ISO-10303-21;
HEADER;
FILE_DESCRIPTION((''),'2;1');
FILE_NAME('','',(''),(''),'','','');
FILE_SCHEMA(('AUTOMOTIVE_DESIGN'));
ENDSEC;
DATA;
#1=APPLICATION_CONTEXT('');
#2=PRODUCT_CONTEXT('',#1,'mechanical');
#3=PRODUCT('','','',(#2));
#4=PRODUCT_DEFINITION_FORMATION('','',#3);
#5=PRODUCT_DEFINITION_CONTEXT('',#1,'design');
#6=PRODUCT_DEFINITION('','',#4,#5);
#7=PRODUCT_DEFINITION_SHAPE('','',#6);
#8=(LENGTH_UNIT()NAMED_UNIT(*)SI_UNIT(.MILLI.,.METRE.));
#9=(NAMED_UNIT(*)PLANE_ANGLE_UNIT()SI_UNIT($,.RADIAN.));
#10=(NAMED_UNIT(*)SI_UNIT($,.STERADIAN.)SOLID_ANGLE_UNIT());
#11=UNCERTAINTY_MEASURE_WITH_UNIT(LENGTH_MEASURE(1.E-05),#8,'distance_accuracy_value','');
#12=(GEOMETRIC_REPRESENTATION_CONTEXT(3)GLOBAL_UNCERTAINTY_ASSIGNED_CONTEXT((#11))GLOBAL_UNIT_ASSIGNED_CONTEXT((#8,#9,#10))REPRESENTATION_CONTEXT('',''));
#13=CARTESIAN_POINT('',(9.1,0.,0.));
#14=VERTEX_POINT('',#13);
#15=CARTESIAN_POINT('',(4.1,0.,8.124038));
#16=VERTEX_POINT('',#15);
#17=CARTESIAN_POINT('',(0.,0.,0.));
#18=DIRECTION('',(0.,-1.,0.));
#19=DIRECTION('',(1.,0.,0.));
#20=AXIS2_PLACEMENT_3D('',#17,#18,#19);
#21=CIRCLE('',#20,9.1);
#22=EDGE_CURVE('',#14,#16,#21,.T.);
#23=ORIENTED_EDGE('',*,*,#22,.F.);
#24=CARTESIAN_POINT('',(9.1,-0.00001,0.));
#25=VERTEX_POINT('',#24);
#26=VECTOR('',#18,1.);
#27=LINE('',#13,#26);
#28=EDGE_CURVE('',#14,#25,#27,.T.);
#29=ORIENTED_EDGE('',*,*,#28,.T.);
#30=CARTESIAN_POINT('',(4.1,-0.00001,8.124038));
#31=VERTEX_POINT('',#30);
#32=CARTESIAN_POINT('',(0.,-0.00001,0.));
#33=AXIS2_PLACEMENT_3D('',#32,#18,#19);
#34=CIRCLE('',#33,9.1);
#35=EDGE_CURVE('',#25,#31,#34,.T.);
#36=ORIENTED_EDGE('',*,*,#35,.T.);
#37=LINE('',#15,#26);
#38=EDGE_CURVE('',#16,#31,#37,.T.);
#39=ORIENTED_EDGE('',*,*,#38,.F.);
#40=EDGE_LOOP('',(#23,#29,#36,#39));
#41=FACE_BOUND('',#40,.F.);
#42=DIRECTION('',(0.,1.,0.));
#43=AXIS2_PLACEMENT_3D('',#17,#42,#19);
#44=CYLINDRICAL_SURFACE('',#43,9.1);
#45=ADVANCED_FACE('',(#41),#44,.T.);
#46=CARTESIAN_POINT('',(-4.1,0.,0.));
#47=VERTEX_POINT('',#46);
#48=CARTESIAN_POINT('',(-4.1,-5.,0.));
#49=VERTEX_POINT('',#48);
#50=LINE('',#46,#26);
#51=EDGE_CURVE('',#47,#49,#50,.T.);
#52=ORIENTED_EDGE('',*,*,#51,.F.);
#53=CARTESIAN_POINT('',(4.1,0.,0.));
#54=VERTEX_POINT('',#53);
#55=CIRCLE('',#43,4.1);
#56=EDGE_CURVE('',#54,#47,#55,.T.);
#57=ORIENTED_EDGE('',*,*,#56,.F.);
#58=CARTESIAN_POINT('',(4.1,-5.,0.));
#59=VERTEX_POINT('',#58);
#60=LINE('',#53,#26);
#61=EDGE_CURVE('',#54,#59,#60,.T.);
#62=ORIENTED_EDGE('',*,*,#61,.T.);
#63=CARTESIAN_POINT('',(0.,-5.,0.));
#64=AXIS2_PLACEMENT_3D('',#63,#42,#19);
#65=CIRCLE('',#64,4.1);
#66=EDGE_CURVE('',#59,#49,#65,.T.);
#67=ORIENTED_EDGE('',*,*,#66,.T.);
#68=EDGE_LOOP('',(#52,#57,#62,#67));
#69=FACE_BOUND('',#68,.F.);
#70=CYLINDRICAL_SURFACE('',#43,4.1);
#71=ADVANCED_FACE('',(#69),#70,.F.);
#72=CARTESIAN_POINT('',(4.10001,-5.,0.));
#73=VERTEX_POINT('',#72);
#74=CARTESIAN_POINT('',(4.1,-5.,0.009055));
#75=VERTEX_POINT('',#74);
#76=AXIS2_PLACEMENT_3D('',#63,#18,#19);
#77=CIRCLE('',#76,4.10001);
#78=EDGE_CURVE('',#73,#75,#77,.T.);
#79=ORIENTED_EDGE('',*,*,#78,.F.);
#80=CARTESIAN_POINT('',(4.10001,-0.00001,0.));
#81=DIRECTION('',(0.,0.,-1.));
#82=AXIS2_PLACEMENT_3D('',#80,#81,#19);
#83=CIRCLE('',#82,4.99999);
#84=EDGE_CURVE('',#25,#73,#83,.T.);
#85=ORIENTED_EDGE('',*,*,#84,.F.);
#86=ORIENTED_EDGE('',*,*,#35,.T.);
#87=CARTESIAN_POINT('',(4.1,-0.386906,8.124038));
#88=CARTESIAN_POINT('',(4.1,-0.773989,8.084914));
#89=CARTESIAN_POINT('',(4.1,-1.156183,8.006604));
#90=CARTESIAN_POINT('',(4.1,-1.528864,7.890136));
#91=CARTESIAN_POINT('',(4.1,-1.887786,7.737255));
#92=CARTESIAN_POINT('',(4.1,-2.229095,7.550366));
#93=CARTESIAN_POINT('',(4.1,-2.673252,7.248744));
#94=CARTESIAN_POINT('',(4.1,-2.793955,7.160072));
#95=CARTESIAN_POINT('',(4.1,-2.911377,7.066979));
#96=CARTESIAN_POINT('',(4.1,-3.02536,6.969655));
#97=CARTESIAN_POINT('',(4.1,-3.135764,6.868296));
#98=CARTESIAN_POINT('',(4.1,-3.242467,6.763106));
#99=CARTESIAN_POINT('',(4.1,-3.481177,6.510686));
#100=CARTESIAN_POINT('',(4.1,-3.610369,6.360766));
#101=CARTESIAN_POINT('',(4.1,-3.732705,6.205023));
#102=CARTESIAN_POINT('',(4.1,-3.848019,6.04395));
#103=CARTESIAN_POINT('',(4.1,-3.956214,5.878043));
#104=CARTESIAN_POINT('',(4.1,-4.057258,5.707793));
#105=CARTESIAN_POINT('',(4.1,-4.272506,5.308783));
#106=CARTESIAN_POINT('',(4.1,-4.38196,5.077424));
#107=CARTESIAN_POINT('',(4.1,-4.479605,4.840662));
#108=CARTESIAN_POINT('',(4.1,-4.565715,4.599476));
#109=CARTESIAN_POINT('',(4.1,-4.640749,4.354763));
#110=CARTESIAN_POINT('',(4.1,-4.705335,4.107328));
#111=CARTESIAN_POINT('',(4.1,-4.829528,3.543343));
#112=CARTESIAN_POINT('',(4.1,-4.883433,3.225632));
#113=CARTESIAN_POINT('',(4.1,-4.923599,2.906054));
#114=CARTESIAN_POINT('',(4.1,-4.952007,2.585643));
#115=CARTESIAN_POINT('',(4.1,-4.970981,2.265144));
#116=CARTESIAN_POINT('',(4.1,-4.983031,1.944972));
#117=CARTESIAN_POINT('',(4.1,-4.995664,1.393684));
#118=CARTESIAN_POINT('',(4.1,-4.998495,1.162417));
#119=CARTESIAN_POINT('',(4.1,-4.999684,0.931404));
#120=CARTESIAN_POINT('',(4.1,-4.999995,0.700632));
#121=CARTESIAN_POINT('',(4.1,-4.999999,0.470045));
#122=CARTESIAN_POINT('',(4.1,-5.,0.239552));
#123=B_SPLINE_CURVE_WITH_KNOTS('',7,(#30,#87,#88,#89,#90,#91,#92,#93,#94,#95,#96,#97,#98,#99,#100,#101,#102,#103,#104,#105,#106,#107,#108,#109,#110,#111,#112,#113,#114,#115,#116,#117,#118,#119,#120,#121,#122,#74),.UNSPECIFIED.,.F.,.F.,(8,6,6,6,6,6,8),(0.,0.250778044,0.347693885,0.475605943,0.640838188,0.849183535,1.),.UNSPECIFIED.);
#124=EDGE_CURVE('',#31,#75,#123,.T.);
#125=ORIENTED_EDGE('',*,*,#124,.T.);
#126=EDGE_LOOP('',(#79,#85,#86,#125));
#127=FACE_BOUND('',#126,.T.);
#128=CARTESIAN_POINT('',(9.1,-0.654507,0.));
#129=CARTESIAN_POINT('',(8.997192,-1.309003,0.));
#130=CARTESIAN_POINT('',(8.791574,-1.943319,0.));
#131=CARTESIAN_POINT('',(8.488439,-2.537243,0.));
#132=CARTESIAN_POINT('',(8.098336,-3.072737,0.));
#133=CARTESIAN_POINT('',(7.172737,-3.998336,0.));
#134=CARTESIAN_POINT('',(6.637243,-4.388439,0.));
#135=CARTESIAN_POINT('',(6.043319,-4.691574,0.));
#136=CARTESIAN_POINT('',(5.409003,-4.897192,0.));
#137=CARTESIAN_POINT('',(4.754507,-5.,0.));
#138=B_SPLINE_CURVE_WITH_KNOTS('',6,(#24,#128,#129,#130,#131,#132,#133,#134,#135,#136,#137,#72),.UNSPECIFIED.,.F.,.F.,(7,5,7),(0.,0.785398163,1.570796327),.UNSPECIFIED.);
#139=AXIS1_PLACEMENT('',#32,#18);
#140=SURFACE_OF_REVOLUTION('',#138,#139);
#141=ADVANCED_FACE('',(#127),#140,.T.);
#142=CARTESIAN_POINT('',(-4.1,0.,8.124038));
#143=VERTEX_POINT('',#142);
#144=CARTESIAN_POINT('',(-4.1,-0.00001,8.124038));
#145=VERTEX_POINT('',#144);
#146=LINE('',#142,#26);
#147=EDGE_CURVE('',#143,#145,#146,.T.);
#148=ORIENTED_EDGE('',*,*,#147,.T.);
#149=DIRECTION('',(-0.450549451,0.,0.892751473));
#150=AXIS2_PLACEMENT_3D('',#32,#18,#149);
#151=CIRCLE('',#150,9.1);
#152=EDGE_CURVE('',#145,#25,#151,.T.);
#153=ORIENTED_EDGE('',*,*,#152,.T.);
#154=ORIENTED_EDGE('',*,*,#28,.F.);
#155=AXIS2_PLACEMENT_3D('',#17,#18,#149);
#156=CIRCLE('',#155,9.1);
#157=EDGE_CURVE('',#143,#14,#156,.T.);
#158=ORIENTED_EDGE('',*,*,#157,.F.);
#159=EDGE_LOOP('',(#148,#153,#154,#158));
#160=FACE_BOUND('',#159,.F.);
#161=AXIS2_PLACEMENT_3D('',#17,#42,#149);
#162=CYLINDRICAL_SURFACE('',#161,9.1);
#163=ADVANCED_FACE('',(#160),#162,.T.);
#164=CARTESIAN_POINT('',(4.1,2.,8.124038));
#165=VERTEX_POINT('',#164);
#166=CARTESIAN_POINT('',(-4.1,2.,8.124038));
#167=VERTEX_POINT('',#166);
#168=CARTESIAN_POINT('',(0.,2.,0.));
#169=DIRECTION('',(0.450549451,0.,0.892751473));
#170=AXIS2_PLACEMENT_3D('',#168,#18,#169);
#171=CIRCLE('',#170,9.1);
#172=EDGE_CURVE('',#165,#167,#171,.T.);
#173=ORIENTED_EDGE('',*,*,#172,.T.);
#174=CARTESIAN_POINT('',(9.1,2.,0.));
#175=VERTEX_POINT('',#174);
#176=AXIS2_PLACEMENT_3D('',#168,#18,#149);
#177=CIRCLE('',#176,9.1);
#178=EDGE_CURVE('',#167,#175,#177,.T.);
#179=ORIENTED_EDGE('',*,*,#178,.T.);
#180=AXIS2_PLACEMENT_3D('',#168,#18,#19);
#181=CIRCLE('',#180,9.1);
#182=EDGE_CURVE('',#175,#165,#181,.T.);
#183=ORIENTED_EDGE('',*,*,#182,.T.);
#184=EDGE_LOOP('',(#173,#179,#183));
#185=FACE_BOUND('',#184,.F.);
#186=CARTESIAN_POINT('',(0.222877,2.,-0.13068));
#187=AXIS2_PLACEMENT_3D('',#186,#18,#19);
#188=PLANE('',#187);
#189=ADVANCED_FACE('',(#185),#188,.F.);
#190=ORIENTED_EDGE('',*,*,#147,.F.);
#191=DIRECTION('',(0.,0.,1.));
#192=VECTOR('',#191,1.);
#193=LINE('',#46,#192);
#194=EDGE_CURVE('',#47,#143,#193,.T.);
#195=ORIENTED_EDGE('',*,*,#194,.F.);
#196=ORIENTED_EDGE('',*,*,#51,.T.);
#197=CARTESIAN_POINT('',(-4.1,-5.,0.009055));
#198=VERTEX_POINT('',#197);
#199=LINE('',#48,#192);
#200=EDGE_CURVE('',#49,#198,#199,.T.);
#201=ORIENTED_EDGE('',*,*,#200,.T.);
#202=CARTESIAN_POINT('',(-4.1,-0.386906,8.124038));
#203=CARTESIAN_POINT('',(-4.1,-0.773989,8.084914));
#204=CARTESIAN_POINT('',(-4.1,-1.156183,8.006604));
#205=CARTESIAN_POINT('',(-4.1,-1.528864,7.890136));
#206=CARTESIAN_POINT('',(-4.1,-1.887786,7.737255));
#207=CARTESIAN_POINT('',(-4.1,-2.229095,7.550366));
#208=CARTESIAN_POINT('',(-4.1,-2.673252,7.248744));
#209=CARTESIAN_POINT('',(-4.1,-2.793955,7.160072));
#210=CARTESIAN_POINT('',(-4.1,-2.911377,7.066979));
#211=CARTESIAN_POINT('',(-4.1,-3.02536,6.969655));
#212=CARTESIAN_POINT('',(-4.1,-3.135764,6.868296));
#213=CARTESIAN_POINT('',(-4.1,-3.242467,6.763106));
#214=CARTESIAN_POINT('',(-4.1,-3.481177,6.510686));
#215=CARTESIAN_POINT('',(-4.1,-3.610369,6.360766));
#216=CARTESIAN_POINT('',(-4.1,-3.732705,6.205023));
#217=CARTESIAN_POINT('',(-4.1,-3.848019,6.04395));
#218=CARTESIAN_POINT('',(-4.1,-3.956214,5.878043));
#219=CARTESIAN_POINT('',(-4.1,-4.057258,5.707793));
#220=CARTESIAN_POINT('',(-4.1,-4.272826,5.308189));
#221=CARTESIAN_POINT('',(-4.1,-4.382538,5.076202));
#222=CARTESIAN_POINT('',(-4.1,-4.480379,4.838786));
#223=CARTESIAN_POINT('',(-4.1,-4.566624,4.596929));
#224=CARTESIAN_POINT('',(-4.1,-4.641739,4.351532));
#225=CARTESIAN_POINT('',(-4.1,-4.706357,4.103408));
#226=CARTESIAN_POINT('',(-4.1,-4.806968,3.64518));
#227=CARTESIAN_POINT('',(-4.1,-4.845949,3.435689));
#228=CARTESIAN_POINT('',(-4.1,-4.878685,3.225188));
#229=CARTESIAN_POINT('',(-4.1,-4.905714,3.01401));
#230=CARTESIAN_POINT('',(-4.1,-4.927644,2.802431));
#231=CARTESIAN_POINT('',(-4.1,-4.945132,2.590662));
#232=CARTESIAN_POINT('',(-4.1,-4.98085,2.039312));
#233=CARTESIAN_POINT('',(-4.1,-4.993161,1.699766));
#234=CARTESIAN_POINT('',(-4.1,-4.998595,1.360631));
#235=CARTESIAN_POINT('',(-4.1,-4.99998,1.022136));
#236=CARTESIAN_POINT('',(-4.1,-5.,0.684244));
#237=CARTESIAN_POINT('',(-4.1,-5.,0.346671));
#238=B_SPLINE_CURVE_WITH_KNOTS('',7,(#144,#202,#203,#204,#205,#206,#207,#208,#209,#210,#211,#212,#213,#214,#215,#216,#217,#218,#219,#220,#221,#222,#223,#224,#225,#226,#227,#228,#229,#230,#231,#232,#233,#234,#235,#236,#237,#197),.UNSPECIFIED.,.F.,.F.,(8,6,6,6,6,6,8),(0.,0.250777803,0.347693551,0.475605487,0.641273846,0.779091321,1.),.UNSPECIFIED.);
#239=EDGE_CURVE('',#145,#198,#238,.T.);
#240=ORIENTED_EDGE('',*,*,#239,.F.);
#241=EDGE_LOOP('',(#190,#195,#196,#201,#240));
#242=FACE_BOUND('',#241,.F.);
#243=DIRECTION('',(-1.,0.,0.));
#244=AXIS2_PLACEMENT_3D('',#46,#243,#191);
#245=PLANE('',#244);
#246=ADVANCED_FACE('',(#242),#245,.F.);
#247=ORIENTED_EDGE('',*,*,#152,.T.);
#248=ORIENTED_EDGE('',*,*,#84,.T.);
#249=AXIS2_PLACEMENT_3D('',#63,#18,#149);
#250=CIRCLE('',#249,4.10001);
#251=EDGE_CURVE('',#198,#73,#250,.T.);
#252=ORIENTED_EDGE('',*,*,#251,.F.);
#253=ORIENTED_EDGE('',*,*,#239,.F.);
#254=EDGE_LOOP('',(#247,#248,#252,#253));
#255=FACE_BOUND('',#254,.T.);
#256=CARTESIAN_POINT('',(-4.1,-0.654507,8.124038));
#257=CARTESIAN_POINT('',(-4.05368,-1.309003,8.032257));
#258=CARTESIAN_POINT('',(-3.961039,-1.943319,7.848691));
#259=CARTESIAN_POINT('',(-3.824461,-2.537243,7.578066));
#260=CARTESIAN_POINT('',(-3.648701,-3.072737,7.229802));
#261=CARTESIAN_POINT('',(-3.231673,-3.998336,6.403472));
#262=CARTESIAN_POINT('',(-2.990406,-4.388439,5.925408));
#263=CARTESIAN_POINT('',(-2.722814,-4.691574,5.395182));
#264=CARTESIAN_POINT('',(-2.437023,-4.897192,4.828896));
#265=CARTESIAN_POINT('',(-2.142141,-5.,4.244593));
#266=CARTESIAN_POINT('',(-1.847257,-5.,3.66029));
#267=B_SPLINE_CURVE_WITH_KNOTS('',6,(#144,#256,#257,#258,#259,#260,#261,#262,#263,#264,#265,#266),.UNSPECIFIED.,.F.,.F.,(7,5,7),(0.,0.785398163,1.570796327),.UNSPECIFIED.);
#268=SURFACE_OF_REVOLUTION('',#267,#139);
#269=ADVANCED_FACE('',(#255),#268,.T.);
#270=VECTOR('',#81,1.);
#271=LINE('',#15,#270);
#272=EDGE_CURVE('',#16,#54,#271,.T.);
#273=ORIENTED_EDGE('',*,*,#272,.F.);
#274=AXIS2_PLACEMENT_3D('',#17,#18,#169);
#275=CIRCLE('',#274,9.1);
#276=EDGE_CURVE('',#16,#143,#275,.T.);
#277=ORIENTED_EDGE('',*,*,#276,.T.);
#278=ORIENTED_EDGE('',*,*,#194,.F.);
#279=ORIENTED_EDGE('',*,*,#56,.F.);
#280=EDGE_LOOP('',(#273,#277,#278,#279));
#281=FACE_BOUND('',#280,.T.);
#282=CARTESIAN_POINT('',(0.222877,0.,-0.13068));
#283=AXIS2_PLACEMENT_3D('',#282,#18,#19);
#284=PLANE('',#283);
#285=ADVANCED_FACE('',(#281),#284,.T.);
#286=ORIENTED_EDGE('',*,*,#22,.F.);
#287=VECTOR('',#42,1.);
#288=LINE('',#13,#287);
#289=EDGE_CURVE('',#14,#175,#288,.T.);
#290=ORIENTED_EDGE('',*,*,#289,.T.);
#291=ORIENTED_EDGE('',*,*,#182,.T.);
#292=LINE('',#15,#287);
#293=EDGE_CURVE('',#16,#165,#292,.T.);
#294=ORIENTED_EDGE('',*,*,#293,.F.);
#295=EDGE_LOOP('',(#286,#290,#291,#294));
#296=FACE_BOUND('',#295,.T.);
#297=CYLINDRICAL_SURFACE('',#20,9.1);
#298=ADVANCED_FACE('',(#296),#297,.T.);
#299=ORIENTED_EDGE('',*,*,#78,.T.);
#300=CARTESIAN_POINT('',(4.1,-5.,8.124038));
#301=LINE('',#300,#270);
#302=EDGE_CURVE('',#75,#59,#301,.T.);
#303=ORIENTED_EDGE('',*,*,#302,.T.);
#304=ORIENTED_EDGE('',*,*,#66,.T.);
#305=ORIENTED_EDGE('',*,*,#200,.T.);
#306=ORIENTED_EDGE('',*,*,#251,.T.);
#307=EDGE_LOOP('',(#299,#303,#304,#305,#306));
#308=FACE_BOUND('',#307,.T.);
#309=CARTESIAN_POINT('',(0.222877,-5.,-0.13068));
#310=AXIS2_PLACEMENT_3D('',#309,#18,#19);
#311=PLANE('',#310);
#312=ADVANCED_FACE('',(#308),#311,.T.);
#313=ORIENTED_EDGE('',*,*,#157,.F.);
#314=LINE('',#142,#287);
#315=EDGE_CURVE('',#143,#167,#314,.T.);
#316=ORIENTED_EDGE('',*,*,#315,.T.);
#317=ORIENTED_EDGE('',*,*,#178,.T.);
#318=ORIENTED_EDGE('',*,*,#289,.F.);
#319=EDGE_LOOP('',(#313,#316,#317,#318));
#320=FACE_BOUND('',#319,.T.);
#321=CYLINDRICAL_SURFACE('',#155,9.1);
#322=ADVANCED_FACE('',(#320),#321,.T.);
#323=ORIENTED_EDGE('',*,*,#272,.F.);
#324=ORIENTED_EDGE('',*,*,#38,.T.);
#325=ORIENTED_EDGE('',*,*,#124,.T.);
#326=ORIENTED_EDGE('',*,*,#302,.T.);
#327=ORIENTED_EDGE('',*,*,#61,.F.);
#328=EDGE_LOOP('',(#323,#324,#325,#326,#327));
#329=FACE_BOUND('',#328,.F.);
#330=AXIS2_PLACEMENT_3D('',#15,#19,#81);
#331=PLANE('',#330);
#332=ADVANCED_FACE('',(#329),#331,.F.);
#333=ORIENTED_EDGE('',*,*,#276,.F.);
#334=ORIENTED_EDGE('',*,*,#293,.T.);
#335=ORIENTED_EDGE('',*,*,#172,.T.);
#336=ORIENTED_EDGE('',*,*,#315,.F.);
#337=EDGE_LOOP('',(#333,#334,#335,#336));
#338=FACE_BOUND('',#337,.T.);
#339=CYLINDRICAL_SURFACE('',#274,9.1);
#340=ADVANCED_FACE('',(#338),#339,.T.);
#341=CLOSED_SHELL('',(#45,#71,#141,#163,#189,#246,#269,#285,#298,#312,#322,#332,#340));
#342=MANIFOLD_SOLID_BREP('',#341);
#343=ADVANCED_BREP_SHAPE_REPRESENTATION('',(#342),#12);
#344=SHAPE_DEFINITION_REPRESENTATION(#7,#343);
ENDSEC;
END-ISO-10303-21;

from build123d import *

# Parameters (mm, degrees)
F1_DEPTH = 2
F2_DEPTH = 5
F3_R     = 4.99999


# Not quite as in the source:
# - a fillet or chamfer is up to 0.001 mm smaller than in the source, because OpenCascade refuses the exact size


with BuildPart() as f1:
    # F0 (on Front) → F1 (new body)
    with BuildSketch(Plane.XZ):
        with BuildLine():
            ThreePointArc((-4.1, 8.1240384046), (-4.7696960071, -7.749838708), (9.1, 0))
            ThreePointArc((9.1, 0), (7.749838708, 4.7696960071), (4.1, 8.1240384046))
            Line((4.1, 8.1240384046), (4.1, 0))
            ThreePointArc((4.1, 0), (0, -4.1), (-4.1, 0))
            Line((-4.1, 0), (-4.1, 8.1240384046))
        make_face()
        with BuildLine():
            Line((4.1, 0), (4.1, 8.1240384046))
            ThreePointArc((4.1, 8.1240384046), (0, 9.1), (-4.1, 8.1240384046))
            Line((-4.1, 8.1240384046), (-4.1, 0))
            ThreePointArc((-4.1, 0), (0, -4.1), (4.1, 0))
        make_face()
    extrude(amount=-F1_DEPTH)

    # F0 (on Front) → F2 (join)
    with BuildSketch(Plane.XZ):
        with BuildLine():
            ThreePointArc((-4.1, 8.1240384046), (-4.7696960071, -7.749838708), (9.1, 0))
            ThreePointArc((9.1, 0), (7.749838708, 4.7696960071), (4.1, 8.1240384046))
            Line((4.1, 8.1240384046), (4.1, 0))
            ThreePointArc((4.1, 0), (0, -4.1), (-4.1, 0))
            Line((-4.1, 0), (-4.1, 8.1240384046))
        make_face()
    extrude(amount=F2_DEPTH)

    # F3 (radius 5 in the source; OpenCascade refuses exactly that, so slightly less here)
    f3_edges = [f1.edges().sort_by_distance(p)[0] for p in [
        (-4.769696, -5, -7.749839),
    ]]
    fillet(f3_edges, radius=F3_R)


solid = f1.part
